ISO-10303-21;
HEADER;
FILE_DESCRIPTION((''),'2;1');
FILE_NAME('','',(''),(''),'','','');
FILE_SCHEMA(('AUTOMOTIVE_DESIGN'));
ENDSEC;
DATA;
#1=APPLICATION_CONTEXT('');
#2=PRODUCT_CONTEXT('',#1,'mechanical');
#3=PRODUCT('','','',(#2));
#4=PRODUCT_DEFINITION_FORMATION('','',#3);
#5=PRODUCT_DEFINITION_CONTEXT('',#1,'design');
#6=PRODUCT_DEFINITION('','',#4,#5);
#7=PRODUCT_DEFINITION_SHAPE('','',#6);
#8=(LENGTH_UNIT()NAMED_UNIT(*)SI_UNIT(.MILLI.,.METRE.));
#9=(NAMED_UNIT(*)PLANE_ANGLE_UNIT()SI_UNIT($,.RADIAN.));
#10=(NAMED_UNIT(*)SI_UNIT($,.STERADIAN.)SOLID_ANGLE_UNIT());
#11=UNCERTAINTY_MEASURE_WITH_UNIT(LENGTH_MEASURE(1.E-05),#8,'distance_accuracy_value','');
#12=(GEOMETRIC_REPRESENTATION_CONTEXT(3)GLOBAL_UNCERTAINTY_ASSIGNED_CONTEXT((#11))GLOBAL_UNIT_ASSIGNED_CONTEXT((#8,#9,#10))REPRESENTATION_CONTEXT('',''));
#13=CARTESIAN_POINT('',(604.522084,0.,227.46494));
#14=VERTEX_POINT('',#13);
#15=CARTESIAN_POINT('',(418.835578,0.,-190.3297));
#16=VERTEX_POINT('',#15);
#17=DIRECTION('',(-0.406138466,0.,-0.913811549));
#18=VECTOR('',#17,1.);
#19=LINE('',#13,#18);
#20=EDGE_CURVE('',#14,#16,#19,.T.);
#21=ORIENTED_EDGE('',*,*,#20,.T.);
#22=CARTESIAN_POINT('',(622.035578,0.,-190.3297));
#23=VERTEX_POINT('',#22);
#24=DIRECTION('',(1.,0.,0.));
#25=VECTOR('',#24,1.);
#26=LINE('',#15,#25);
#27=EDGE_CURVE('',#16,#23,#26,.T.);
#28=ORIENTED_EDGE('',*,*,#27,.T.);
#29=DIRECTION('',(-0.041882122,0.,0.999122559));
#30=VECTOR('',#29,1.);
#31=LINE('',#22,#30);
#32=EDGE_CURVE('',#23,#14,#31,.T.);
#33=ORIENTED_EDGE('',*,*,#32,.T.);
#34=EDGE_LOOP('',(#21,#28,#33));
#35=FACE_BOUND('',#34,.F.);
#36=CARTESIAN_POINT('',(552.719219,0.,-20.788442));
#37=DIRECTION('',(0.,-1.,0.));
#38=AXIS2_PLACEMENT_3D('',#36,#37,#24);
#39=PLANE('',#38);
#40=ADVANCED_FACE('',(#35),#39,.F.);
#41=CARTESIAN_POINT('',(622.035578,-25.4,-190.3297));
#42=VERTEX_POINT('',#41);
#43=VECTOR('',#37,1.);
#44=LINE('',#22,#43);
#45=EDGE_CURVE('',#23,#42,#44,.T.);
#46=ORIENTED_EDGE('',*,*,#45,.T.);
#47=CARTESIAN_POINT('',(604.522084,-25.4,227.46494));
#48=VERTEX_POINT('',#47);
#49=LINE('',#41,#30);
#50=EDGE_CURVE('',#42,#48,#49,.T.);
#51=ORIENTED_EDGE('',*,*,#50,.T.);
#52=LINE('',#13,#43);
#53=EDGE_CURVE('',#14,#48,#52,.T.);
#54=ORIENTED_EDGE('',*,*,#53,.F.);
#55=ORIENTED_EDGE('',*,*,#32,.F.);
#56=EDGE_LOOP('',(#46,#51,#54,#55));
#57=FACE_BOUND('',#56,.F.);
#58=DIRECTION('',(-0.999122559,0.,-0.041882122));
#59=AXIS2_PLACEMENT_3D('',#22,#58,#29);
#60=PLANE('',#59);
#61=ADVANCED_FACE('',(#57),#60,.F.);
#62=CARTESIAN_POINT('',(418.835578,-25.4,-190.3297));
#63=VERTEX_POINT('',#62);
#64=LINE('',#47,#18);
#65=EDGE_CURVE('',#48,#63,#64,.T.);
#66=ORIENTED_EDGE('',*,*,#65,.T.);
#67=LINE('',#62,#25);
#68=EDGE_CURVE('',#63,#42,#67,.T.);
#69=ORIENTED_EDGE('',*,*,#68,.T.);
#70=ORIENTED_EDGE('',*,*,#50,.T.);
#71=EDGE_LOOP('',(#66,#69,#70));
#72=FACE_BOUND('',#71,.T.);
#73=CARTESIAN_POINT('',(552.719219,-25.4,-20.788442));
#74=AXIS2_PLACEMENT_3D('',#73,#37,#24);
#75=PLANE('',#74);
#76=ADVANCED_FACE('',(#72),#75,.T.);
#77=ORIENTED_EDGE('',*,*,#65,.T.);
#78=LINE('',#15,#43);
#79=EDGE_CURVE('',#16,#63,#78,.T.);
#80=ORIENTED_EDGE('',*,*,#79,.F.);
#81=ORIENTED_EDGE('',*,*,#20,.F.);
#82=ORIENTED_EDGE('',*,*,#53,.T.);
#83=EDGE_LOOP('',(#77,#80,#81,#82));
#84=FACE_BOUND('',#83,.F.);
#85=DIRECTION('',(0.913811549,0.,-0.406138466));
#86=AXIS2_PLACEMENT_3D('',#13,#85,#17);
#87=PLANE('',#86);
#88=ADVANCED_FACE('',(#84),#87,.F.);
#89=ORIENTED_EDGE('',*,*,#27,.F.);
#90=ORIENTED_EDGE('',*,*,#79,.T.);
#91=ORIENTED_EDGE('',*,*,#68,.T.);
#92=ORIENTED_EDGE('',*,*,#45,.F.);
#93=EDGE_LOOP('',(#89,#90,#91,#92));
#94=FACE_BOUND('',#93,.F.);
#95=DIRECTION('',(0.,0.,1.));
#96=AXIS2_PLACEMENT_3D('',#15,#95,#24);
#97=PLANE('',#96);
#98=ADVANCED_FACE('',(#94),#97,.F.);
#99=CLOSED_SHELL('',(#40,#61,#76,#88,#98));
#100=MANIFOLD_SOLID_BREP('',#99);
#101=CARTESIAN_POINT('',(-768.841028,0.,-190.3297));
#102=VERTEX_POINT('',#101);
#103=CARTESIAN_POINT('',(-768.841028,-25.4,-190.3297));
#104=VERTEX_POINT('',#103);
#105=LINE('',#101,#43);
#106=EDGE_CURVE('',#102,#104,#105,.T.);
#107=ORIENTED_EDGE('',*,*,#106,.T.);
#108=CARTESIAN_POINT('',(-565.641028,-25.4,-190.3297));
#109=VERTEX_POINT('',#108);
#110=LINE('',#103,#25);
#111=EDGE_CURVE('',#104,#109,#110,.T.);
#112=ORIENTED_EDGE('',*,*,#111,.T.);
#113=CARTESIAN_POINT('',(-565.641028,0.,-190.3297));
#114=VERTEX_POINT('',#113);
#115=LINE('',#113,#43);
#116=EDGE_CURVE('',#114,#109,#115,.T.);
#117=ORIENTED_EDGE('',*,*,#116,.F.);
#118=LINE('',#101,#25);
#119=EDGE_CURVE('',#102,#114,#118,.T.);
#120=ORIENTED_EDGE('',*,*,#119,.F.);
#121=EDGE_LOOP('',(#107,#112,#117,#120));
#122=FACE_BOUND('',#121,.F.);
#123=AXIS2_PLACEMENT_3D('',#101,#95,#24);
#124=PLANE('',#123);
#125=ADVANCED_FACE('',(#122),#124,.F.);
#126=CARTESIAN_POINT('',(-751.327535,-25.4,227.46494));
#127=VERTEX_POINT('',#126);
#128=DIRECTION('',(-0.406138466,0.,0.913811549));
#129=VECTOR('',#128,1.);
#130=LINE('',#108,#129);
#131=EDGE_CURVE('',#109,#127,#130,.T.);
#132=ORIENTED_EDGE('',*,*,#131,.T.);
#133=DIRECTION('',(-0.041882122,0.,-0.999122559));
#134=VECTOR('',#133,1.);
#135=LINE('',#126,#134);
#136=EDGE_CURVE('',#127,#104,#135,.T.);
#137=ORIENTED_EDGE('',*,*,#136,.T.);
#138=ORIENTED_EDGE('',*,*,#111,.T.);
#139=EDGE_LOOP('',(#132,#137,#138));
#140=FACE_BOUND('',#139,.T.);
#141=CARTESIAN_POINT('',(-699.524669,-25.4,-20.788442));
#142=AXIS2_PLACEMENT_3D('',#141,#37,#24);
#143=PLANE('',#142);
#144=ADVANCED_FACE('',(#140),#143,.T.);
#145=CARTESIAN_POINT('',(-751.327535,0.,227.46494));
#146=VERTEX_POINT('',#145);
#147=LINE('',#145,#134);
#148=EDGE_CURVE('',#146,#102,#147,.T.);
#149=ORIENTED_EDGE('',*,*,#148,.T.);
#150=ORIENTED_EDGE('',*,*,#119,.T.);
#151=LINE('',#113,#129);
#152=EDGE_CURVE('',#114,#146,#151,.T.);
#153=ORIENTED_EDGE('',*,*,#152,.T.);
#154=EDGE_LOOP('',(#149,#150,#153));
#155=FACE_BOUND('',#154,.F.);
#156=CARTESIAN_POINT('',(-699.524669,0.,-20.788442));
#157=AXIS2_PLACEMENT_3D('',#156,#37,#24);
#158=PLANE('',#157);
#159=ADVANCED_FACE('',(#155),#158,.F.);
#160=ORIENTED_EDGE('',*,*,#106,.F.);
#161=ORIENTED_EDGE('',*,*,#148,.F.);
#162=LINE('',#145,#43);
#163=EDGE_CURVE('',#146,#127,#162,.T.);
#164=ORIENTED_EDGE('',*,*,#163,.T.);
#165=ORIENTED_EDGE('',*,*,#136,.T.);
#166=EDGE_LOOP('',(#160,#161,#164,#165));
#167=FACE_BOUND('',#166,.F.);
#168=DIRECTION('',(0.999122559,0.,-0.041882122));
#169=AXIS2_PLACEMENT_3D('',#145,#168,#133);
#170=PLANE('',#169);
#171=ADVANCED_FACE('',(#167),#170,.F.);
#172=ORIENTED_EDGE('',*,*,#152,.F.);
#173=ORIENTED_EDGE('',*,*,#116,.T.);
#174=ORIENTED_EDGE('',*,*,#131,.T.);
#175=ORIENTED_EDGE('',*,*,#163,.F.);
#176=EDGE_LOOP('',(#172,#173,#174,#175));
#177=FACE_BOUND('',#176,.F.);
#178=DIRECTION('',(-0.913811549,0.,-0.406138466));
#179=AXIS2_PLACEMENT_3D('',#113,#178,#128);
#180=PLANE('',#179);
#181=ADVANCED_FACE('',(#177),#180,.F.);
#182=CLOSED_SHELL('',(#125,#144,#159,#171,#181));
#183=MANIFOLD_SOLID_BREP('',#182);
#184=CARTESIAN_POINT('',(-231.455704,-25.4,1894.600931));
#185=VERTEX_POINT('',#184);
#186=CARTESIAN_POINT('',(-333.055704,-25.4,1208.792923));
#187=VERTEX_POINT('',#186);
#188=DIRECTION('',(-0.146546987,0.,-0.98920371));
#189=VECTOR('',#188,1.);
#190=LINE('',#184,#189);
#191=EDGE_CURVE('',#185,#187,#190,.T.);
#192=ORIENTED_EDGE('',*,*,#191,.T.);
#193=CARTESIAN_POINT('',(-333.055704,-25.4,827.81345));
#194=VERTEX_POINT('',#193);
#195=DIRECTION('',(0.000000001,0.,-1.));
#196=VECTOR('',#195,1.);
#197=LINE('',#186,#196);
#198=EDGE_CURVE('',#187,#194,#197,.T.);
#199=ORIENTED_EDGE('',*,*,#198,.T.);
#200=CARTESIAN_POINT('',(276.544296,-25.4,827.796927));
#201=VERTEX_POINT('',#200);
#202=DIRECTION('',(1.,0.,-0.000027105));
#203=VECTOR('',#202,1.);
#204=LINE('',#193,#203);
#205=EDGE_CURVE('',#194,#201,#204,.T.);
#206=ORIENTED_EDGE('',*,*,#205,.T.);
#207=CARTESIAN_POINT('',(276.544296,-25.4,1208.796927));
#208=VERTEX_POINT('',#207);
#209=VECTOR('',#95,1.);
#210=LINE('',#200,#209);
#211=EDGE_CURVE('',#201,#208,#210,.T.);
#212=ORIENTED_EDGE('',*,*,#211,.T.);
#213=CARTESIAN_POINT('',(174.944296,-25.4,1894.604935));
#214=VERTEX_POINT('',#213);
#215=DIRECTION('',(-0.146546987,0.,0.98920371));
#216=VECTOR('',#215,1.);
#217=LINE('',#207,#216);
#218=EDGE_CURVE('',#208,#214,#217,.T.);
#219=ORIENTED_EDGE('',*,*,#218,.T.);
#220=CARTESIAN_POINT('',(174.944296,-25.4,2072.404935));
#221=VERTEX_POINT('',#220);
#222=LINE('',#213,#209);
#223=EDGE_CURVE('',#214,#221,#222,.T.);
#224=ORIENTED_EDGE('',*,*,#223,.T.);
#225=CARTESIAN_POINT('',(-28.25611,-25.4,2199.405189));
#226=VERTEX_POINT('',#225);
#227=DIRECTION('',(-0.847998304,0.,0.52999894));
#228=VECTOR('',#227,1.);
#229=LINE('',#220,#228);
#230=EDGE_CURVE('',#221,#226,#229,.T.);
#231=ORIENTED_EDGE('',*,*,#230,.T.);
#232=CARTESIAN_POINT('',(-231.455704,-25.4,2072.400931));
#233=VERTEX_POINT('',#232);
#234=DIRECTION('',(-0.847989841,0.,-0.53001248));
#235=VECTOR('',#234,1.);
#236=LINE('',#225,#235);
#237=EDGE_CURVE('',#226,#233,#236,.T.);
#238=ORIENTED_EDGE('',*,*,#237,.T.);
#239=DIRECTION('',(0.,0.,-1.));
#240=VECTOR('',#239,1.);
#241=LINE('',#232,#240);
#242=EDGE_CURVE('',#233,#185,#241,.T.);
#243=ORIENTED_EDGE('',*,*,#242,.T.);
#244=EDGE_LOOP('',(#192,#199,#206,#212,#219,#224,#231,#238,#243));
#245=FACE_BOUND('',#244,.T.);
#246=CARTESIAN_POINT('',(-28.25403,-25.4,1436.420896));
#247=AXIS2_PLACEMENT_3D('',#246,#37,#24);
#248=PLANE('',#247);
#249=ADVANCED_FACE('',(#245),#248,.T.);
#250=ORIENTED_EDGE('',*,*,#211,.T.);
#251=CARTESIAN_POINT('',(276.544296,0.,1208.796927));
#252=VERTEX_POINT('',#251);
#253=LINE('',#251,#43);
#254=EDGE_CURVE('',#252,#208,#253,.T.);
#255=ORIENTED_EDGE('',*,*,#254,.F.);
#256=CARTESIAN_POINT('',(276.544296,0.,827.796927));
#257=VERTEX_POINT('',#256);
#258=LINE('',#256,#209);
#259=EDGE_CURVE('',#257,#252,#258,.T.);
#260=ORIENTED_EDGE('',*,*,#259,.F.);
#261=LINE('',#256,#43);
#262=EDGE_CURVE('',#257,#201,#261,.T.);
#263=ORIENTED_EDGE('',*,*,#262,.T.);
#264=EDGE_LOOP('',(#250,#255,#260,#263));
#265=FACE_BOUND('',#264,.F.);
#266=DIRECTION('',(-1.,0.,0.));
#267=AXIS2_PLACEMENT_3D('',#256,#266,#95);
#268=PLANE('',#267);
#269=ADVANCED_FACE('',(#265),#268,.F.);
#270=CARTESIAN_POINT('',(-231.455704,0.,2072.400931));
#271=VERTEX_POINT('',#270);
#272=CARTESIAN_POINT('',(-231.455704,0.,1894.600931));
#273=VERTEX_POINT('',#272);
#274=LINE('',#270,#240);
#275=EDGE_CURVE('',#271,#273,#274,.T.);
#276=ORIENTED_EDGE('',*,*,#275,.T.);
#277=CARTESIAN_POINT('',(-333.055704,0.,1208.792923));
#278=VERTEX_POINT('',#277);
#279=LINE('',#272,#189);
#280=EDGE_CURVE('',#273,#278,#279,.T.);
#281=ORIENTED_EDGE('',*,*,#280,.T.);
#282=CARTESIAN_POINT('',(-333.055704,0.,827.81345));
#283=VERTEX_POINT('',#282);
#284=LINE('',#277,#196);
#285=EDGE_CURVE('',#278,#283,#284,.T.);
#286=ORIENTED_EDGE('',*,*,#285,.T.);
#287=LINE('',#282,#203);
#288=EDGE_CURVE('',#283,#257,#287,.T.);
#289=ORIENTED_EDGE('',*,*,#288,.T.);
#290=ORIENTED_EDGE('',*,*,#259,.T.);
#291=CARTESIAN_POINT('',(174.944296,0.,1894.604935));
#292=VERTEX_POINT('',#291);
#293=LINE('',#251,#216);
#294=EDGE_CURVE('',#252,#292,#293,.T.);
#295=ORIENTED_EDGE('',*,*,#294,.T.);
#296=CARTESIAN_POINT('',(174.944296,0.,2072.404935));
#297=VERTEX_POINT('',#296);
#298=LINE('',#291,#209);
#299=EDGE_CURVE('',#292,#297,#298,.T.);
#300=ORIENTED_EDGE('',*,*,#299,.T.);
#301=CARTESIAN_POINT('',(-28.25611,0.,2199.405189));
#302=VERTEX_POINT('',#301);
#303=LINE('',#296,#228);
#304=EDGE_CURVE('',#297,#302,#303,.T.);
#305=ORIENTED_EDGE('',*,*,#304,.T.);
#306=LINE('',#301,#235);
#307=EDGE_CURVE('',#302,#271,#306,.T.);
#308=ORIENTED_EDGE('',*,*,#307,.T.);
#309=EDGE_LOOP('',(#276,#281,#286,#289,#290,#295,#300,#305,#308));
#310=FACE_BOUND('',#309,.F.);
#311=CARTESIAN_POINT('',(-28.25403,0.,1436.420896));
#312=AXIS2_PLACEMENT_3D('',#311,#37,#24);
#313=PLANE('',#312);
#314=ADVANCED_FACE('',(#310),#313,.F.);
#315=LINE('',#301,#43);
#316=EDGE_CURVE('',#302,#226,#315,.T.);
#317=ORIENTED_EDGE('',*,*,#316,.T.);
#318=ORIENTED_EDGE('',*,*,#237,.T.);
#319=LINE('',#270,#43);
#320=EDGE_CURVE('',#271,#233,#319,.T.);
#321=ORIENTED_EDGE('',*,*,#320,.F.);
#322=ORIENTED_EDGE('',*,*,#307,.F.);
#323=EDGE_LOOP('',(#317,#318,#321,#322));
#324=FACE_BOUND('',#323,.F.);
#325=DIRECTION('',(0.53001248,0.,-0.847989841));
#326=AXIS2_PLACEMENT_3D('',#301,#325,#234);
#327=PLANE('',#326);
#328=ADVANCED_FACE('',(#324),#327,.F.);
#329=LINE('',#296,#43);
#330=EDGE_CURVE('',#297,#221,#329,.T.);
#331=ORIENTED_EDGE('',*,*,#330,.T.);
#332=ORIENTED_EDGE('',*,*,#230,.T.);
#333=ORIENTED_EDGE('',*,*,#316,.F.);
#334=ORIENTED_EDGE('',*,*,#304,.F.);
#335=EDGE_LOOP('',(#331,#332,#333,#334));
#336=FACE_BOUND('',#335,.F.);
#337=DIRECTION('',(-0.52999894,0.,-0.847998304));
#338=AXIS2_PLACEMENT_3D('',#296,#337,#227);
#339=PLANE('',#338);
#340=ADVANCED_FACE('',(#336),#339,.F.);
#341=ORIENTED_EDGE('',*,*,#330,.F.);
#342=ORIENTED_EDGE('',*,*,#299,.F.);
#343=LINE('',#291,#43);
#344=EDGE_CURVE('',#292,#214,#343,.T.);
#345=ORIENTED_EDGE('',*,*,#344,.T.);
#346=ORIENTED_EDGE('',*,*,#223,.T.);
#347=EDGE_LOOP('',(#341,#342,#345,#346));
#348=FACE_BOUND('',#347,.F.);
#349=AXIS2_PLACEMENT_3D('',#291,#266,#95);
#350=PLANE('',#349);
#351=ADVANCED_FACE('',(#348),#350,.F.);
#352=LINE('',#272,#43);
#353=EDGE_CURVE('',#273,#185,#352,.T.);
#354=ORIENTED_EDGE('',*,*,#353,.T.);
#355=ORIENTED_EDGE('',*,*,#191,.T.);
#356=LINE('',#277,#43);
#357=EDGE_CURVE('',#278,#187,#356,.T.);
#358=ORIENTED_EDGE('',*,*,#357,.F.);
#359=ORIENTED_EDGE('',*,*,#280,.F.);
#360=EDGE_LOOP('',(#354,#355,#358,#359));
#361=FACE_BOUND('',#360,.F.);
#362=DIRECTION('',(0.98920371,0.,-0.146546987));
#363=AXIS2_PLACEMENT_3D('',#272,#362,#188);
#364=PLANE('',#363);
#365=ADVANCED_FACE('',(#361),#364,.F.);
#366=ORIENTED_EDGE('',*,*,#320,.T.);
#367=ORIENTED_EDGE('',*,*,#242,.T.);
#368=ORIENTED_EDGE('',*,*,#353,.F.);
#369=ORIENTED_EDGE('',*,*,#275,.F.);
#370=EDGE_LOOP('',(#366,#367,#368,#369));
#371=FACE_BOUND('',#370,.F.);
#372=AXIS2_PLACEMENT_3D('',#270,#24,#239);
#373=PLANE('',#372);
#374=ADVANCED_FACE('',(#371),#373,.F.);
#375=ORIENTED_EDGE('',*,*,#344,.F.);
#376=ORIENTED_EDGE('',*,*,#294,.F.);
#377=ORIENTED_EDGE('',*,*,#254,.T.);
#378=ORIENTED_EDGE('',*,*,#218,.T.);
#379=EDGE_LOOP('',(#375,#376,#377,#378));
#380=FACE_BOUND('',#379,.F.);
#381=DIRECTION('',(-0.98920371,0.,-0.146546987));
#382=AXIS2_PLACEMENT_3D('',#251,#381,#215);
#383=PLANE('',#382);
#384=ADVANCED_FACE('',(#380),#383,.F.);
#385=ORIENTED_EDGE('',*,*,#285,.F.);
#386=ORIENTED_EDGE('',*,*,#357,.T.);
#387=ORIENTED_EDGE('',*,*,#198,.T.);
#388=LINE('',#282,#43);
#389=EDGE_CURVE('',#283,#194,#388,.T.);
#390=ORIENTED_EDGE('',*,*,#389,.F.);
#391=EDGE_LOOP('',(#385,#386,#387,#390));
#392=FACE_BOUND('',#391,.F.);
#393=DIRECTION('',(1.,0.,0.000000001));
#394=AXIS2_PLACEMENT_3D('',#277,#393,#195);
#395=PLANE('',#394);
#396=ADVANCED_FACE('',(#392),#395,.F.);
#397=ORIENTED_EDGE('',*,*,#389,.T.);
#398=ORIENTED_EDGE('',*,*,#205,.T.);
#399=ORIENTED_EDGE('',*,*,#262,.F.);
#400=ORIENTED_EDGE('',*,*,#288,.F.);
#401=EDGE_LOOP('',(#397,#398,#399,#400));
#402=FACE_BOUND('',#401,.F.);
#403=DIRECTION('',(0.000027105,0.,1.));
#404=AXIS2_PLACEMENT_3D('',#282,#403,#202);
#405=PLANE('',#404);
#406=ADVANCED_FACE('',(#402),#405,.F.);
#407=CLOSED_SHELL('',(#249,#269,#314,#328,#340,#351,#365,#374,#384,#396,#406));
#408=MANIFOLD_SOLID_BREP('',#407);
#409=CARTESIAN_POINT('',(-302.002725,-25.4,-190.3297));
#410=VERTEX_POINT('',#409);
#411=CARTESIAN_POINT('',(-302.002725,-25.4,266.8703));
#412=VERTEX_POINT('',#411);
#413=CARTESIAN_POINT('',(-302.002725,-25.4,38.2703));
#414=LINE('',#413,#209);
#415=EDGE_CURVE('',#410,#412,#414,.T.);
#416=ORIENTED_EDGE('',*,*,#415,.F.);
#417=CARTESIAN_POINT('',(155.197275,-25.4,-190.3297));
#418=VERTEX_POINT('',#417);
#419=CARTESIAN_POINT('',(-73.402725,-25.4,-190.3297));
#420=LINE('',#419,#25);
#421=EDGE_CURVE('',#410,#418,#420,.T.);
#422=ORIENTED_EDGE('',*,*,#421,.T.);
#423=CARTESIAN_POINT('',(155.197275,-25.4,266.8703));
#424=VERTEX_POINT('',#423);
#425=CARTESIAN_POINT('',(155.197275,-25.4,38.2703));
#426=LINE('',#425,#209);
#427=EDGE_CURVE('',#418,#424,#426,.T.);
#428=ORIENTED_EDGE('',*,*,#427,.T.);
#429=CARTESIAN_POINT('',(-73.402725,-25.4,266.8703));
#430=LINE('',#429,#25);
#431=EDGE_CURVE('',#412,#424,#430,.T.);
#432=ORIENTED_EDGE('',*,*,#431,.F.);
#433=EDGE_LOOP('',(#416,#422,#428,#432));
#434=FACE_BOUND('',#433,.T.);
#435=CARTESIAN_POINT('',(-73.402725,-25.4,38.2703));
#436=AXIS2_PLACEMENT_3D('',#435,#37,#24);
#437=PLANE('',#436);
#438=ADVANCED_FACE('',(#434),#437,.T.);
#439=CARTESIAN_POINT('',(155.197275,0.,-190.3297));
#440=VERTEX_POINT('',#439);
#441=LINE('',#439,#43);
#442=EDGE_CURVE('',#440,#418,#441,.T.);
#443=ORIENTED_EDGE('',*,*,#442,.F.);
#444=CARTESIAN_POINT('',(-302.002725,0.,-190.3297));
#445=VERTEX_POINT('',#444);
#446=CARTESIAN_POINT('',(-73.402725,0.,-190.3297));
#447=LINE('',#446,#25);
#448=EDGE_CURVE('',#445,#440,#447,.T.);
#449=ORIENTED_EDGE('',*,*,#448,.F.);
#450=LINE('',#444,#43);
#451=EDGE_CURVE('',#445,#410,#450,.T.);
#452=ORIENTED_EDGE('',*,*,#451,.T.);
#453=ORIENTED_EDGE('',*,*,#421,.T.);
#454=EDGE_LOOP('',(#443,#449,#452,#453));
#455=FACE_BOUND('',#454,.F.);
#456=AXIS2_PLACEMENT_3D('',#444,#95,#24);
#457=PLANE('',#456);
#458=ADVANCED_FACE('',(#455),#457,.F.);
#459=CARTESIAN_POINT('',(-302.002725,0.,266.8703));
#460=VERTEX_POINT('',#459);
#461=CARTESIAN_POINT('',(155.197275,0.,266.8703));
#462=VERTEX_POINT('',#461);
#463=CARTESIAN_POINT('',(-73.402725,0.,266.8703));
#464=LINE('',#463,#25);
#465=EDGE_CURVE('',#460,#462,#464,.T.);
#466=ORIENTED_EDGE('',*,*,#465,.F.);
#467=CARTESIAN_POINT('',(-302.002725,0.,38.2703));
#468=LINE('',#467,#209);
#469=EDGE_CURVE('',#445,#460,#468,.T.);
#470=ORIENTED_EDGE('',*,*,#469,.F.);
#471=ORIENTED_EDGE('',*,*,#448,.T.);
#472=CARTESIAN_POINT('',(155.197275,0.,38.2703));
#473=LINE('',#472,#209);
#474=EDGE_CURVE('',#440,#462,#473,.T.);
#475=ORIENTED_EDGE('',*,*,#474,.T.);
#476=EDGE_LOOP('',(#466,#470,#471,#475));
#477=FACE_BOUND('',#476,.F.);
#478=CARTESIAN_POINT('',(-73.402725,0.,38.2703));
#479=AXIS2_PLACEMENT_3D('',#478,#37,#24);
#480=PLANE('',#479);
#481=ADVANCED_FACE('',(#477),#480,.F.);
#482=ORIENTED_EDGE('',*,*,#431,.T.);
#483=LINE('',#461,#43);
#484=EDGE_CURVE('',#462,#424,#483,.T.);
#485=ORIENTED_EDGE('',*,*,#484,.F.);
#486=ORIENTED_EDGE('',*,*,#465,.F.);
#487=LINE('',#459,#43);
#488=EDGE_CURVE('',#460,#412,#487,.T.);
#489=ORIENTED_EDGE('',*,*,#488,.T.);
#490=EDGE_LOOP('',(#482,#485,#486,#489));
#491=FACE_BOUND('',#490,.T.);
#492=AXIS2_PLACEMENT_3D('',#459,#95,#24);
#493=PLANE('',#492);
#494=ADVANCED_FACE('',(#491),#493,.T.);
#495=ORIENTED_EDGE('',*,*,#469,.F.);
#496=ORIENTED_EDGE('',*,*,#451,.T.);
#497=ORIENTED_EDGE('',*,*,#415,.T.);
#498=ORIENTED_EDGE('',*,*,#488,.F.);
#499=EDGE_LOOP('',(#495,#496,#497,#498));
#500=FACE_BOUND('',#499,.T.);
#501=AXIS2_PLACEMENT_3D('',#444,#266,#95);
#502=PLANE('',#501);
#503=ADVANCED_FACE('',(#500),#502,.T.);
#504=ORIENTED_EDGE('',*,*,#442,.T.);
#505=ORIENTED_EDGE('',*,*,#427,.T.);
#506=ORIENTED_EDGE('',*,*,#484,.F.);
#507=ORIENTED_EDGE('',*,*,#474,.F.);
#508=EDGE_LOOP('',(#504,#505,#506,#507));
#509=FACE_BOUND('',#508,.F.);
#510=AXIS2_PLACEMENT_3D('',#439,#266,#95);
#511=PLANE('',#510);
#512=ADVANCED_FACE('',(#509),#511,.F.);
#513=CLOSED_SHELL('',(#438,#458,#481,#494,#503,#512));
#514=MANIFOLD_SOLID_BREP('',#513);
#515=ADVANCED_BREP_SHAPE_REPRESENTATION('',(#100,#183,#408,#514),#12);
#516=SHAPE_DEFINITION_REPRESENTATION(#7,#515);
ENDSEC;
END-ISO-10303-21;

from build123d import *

# Parameters (mm, degrees)
F0_W     = 457.2
F0_H     = 457.2
F1_DEPTH = 25.4


# Not quite as in the source:
# - ends of sketch curves that miss each other by under 0.0002 mm in the source are joined


with BuildPart() as f1:
    # F0 (on Front) → F1 (new body)
    with BuildSketch(Plane.XZ):
        with Locations((-73.4027251601, 38.2703000127)):
            Rectangle(F0_W, F0_H)
    extrude(amount=F1_DEPTH)


with BuildPart() as f1b:
    # F0 (on Front) → F1, piece 2 (new body)
    with BuildSketch(Plane.XZ):
        Polygon((-768.841027844, -190.3296999873), (-565.641027844, -190.3296999873), (-751.3275345236, 227.4649400419), align=None)
    extrude(amount=F1_DEPTH)


with BuildPart() as f1c:
    # F0 (on Front) → F1, piece 3 (new body)
    with BuildSketch(Plane.XZ):
        Polygon((604.5220842033, 227.4649400419), (418.8355775237, -190.3296999873), (622.0355775237, -190.3296999873), align=None)
    extrude(amount=F1_DEPTH)


with BuildPart() as f1d:
    # F0 (on Front) → F1, piece 4 (new body)
    with BuildSketch(Plane.XZ):
        Polygon((-333.0557037953, 827.8134502805), (276.5442959808, 827.7969272853), (276.5442959808, 1208.7969272853), (174.944296007, 1894.604935298), (174.944296007, 2072.404935298), (-28.2561103925, 2199.4051892978), (-231.455703993, 2072.4009312714), (-231.455703993, 1894.6009312714), (-333.0557040787, 1208.7929232587), align=None)
    extrude(amount=F1_DEPTH)


solid = Compound([f1.part, f1b.part, f1c.part, f1d.part])
